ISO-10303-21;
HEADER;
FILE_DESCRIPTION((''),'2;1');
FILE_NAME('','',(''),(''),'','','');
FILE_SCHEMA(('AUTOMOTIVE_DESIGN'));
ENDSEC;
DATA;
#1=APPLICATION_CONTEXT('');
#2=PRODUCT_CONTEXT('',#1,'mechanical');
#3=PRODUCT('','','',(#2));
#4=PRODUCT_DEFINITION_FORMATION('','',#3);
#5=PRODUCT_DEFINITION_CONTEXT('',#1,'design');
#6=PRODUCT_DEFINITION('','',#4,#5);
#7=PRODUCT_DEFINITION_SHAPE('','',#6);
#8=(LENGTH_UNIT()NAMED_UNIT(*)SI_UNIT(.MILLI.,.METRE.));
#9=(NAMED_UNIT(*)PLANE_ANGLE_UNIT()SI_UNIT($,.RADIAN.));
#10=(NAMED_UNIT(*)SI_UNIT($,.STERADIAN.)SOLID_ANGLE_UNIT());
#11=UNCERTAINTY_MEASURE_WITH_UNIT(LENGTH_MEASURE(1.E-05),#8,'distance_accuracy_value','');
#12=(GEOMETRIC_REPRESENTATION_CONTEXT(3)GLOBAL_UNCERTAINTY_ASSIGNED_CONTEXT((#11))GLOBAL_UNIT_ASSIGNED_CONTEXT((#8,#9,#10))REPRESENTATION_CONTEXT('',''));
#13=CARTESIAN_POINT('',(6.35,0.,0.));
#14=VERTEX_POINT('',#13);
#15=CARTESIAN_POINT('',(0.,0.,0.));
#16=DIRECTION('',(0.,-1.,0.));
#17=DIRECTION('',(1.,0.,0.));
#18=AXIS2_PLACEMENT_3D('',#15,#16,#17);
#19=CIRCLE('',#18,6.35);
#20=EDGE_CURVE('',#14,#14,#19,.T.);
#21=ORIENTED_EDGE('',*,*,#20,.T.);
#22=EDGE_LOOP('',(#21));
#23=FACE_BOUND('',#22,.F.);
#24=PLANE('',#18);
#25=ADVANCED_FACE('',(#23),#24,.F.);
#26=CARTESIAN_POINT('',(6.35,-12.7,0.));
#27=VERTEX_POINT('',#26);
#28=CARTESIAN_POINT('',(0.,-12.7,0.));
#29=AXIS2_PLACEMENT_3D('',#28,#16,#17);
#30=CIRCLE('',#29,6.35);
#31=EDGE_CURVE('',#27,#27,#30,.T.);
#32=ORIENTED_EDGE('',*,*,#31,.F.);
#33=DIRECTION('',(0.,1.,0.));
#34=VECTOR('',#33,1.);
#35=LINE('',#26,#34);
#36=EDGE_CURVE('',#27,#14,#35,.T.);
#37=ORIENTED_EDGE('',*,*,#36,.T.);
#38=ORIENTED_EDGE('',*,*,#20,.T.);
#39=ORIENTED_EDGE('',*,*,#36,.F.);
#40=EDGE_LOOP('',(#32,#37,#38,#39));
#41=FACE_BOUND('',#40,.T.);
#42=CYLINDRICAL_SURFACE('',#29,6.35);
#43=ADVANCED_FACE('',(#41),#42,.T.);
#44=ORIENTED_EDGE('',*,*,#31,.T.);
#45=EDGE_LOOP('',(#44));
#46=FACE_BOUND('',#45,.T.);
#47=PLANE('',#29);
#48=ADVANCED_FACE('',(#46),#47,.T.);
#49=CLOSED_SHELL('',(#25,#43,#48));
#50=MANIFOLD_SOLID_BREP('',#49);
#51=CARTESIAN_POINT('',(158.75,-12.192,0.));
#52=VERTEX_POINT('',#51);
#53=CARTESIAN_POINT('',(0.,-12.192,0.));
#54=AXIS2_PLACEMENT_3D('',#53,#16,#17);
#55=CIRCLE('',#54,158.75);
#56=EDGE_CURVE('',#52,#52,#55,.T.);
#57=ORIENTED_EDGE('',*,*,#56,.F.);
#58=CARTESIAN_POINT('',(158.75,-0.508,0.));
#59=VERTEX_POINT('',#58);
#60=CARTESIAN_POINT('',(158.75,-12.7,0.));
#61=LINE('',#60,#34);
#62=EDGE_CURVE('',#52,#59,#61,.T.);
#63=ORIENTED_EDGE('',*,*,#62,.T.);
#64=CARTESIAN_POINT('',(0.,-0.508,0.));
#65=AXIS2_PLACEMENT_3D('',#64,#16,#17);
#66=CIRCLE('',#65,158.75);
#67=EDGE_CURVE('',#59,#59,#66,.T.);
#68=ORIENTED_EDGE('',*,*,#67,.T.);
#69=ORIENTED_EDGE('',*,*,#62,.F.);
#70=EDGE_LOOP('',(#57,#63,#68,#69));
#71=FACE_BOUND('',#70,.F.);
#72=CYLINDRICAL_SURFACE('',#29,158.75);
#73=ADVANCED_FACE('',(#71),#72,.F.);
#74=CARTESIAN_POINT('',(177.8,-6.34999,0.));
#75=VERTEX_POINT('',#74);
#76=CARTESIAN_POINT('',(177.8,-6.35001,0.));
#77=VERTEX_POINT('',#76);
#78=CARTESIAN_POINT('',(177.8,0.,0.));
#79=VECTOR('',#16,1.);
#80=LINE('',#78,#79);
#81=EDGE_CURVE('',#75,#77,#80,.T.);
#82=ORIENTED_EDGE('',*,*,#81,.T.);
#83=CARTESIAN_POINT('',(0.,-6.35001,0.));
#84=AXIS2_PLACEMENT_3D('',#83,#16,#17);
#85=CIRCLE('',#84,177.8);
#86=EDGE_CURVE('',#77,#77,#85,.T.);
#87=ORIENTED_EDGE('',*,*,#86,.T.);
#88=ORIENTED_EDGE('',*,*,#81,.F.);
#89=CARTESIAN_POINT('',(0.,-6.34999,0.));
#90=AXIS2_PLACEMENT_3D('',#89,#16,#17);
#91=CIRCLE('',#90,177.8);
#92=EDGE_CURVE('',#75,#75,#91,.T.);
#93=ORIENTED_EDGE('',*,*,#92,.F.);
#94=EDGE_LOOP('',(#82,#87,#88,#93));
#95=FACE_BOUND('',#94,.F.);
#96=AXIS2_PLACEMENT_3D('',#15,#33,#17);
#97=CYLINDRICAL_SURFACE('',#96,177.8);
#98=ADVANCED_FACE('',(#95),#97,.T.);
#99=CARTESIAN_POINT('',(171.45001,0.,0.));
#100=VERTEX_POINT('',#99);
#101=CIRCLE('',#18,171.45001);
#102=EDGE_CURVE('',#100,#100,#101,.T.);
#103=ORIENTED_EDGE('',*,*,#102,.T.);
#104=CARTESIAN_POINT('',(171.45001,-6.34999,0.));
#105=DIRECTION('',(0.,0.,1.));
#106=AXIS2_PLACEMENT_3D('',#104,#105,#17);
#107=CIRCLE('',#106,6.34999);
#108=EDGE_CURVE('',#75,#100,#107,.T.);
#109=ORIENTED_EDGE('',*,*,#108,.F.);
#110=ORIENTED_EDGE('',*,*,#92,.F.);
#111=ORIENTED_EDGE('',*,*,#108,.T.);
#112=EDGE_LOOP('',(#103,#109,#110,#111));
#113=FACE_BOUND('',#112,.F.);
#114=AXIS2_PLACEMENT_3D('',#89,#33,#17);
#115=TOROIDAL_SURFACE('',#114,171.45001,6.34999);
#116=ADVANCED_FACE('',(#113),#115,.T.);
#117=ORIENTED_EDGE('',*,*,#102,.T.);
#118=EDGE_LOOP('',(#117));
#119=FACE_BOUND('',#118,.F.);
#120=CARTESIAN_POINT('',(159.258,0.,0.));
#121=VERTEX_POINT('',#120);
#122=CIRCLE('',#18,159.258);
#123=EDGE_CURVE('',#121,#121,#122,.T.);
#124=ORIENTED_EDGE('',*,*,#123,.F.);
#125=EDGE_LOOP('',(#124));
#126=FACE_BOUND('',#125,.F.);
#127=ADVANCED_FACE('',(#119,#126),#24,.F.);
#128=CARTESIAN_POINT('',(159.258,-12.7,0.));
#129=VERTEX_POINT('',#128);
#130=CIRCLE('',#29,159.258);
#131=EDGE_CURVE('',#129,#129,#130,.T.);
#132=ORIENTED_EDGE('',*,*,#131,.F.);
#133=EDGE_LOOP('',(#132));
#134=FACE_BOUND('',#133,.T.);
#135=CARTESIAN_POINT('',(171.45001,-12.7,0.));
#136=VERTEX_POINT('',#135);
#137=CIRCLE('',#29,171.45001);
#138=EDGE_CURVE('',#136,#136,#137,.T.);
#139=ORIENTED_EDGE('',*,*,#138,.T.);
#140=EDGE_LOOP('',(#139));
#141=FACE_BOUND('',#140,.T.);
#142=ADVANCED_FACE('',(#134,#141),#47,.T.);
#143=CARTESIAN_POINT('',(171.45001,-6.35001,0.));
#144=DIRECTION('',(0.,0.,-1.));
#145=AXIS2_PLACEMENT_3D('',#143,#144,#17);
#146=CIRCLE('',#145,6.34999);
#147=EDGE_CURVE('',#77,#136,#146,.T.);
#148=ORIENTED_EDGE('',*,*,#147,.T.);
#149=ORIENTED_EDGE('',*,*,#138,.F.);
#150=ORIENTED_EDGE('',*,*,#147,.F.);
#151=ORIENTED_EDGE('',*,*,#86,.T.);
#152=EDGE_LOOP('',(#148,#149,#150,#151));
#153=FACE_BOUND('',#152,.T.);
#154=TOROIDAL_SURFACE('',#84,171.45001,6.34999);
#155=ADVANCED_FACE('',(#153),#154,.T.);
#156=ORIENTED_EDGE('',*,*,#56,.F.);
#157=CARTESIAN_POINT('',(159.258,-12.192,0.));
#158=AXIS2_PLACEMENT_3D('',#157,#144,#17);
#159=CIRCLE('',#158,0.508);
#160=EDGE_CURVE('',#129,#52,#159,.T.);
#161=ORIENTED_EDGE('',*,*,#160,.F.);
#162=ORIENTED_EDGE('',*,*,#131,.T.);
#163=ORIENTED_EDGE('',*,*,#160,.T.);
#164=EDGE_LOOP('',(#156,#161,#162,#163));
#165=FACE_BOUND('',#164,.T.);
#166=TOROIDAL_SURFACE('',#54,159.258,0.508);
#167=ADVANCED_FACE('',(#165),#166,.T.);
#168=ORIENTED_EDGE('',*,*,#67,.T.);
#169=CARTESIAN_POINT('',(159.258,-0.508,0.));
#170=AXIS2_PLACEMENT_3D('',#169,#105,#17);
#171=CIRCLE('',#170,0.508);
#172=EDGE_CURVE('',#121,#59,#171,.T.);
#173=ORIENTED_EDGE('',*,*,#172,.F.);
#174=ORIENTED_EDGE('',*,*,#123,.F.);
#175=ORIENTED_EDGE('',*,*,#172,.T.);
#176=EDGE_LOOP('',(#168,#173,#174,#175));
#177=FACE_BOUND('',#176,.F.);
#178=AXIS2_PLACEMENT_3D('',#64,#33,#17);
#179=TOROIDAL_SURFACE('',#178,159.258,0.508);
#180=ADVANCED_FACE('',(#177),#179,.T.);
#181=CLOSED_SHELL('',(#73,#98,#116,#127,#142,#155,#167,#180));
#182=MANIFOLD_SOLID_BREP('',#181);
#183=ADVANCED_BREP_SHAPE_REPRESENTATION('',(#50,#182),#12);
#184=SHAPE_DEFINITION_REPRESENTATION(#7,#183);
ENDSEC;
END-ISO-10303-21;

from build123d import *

# Parameters (mm, degrees)
F0_R     = 177.8
F1_DEPTH = 12.7
F2_R     = 158.75
F2_R_2   = 6.35
F3_DEPTH = 12.701
F4_R     = 6.34999
F5_R     = 0.508


# Not quite as in the source:
# - a fillet or chamfer is up to 0.001 mm smaller than in the source, because OpenCascade refuses the exact size


with BuildPart() as f1:
    # F0 (on Front) → F1 (new body)
    with BuildSketch(Plane.XZ):
        Circle(F0_R)
    extrude(amount=F1_DEPTH)

    # F2 (on face) → F3 (cut, through all)
    with BuildSketch(Plane.XZ.offset(12.7)):
        Circle(F2_R)
        Circle(F2_R_2, mode=Mode.SUBTRACT)
    extrude(amount=-F3_DEPTH, mode=Mode.SUBTRACT)

    # F4 (radius 6.35 in the source; OpenCascade refuses exactly that, so slightly less here)
    f4_edges = [f1.edges().sort_by_distance(p)[0] for p in [
        (-177.8, -12.7, 0),
        (-177.8, 0, 0),
    ]]
    fillet(f4_edges, radius=F4_R)

    # F5
    f5_edges = [f1.edges().sort_by_distance(p)[0] for p in [
        (-158.75, 0, 0),
        (-158.75, -12.7, 0),
    ]]
    fillet(f5_edges, radius=F5_R)


solid = f1.part
